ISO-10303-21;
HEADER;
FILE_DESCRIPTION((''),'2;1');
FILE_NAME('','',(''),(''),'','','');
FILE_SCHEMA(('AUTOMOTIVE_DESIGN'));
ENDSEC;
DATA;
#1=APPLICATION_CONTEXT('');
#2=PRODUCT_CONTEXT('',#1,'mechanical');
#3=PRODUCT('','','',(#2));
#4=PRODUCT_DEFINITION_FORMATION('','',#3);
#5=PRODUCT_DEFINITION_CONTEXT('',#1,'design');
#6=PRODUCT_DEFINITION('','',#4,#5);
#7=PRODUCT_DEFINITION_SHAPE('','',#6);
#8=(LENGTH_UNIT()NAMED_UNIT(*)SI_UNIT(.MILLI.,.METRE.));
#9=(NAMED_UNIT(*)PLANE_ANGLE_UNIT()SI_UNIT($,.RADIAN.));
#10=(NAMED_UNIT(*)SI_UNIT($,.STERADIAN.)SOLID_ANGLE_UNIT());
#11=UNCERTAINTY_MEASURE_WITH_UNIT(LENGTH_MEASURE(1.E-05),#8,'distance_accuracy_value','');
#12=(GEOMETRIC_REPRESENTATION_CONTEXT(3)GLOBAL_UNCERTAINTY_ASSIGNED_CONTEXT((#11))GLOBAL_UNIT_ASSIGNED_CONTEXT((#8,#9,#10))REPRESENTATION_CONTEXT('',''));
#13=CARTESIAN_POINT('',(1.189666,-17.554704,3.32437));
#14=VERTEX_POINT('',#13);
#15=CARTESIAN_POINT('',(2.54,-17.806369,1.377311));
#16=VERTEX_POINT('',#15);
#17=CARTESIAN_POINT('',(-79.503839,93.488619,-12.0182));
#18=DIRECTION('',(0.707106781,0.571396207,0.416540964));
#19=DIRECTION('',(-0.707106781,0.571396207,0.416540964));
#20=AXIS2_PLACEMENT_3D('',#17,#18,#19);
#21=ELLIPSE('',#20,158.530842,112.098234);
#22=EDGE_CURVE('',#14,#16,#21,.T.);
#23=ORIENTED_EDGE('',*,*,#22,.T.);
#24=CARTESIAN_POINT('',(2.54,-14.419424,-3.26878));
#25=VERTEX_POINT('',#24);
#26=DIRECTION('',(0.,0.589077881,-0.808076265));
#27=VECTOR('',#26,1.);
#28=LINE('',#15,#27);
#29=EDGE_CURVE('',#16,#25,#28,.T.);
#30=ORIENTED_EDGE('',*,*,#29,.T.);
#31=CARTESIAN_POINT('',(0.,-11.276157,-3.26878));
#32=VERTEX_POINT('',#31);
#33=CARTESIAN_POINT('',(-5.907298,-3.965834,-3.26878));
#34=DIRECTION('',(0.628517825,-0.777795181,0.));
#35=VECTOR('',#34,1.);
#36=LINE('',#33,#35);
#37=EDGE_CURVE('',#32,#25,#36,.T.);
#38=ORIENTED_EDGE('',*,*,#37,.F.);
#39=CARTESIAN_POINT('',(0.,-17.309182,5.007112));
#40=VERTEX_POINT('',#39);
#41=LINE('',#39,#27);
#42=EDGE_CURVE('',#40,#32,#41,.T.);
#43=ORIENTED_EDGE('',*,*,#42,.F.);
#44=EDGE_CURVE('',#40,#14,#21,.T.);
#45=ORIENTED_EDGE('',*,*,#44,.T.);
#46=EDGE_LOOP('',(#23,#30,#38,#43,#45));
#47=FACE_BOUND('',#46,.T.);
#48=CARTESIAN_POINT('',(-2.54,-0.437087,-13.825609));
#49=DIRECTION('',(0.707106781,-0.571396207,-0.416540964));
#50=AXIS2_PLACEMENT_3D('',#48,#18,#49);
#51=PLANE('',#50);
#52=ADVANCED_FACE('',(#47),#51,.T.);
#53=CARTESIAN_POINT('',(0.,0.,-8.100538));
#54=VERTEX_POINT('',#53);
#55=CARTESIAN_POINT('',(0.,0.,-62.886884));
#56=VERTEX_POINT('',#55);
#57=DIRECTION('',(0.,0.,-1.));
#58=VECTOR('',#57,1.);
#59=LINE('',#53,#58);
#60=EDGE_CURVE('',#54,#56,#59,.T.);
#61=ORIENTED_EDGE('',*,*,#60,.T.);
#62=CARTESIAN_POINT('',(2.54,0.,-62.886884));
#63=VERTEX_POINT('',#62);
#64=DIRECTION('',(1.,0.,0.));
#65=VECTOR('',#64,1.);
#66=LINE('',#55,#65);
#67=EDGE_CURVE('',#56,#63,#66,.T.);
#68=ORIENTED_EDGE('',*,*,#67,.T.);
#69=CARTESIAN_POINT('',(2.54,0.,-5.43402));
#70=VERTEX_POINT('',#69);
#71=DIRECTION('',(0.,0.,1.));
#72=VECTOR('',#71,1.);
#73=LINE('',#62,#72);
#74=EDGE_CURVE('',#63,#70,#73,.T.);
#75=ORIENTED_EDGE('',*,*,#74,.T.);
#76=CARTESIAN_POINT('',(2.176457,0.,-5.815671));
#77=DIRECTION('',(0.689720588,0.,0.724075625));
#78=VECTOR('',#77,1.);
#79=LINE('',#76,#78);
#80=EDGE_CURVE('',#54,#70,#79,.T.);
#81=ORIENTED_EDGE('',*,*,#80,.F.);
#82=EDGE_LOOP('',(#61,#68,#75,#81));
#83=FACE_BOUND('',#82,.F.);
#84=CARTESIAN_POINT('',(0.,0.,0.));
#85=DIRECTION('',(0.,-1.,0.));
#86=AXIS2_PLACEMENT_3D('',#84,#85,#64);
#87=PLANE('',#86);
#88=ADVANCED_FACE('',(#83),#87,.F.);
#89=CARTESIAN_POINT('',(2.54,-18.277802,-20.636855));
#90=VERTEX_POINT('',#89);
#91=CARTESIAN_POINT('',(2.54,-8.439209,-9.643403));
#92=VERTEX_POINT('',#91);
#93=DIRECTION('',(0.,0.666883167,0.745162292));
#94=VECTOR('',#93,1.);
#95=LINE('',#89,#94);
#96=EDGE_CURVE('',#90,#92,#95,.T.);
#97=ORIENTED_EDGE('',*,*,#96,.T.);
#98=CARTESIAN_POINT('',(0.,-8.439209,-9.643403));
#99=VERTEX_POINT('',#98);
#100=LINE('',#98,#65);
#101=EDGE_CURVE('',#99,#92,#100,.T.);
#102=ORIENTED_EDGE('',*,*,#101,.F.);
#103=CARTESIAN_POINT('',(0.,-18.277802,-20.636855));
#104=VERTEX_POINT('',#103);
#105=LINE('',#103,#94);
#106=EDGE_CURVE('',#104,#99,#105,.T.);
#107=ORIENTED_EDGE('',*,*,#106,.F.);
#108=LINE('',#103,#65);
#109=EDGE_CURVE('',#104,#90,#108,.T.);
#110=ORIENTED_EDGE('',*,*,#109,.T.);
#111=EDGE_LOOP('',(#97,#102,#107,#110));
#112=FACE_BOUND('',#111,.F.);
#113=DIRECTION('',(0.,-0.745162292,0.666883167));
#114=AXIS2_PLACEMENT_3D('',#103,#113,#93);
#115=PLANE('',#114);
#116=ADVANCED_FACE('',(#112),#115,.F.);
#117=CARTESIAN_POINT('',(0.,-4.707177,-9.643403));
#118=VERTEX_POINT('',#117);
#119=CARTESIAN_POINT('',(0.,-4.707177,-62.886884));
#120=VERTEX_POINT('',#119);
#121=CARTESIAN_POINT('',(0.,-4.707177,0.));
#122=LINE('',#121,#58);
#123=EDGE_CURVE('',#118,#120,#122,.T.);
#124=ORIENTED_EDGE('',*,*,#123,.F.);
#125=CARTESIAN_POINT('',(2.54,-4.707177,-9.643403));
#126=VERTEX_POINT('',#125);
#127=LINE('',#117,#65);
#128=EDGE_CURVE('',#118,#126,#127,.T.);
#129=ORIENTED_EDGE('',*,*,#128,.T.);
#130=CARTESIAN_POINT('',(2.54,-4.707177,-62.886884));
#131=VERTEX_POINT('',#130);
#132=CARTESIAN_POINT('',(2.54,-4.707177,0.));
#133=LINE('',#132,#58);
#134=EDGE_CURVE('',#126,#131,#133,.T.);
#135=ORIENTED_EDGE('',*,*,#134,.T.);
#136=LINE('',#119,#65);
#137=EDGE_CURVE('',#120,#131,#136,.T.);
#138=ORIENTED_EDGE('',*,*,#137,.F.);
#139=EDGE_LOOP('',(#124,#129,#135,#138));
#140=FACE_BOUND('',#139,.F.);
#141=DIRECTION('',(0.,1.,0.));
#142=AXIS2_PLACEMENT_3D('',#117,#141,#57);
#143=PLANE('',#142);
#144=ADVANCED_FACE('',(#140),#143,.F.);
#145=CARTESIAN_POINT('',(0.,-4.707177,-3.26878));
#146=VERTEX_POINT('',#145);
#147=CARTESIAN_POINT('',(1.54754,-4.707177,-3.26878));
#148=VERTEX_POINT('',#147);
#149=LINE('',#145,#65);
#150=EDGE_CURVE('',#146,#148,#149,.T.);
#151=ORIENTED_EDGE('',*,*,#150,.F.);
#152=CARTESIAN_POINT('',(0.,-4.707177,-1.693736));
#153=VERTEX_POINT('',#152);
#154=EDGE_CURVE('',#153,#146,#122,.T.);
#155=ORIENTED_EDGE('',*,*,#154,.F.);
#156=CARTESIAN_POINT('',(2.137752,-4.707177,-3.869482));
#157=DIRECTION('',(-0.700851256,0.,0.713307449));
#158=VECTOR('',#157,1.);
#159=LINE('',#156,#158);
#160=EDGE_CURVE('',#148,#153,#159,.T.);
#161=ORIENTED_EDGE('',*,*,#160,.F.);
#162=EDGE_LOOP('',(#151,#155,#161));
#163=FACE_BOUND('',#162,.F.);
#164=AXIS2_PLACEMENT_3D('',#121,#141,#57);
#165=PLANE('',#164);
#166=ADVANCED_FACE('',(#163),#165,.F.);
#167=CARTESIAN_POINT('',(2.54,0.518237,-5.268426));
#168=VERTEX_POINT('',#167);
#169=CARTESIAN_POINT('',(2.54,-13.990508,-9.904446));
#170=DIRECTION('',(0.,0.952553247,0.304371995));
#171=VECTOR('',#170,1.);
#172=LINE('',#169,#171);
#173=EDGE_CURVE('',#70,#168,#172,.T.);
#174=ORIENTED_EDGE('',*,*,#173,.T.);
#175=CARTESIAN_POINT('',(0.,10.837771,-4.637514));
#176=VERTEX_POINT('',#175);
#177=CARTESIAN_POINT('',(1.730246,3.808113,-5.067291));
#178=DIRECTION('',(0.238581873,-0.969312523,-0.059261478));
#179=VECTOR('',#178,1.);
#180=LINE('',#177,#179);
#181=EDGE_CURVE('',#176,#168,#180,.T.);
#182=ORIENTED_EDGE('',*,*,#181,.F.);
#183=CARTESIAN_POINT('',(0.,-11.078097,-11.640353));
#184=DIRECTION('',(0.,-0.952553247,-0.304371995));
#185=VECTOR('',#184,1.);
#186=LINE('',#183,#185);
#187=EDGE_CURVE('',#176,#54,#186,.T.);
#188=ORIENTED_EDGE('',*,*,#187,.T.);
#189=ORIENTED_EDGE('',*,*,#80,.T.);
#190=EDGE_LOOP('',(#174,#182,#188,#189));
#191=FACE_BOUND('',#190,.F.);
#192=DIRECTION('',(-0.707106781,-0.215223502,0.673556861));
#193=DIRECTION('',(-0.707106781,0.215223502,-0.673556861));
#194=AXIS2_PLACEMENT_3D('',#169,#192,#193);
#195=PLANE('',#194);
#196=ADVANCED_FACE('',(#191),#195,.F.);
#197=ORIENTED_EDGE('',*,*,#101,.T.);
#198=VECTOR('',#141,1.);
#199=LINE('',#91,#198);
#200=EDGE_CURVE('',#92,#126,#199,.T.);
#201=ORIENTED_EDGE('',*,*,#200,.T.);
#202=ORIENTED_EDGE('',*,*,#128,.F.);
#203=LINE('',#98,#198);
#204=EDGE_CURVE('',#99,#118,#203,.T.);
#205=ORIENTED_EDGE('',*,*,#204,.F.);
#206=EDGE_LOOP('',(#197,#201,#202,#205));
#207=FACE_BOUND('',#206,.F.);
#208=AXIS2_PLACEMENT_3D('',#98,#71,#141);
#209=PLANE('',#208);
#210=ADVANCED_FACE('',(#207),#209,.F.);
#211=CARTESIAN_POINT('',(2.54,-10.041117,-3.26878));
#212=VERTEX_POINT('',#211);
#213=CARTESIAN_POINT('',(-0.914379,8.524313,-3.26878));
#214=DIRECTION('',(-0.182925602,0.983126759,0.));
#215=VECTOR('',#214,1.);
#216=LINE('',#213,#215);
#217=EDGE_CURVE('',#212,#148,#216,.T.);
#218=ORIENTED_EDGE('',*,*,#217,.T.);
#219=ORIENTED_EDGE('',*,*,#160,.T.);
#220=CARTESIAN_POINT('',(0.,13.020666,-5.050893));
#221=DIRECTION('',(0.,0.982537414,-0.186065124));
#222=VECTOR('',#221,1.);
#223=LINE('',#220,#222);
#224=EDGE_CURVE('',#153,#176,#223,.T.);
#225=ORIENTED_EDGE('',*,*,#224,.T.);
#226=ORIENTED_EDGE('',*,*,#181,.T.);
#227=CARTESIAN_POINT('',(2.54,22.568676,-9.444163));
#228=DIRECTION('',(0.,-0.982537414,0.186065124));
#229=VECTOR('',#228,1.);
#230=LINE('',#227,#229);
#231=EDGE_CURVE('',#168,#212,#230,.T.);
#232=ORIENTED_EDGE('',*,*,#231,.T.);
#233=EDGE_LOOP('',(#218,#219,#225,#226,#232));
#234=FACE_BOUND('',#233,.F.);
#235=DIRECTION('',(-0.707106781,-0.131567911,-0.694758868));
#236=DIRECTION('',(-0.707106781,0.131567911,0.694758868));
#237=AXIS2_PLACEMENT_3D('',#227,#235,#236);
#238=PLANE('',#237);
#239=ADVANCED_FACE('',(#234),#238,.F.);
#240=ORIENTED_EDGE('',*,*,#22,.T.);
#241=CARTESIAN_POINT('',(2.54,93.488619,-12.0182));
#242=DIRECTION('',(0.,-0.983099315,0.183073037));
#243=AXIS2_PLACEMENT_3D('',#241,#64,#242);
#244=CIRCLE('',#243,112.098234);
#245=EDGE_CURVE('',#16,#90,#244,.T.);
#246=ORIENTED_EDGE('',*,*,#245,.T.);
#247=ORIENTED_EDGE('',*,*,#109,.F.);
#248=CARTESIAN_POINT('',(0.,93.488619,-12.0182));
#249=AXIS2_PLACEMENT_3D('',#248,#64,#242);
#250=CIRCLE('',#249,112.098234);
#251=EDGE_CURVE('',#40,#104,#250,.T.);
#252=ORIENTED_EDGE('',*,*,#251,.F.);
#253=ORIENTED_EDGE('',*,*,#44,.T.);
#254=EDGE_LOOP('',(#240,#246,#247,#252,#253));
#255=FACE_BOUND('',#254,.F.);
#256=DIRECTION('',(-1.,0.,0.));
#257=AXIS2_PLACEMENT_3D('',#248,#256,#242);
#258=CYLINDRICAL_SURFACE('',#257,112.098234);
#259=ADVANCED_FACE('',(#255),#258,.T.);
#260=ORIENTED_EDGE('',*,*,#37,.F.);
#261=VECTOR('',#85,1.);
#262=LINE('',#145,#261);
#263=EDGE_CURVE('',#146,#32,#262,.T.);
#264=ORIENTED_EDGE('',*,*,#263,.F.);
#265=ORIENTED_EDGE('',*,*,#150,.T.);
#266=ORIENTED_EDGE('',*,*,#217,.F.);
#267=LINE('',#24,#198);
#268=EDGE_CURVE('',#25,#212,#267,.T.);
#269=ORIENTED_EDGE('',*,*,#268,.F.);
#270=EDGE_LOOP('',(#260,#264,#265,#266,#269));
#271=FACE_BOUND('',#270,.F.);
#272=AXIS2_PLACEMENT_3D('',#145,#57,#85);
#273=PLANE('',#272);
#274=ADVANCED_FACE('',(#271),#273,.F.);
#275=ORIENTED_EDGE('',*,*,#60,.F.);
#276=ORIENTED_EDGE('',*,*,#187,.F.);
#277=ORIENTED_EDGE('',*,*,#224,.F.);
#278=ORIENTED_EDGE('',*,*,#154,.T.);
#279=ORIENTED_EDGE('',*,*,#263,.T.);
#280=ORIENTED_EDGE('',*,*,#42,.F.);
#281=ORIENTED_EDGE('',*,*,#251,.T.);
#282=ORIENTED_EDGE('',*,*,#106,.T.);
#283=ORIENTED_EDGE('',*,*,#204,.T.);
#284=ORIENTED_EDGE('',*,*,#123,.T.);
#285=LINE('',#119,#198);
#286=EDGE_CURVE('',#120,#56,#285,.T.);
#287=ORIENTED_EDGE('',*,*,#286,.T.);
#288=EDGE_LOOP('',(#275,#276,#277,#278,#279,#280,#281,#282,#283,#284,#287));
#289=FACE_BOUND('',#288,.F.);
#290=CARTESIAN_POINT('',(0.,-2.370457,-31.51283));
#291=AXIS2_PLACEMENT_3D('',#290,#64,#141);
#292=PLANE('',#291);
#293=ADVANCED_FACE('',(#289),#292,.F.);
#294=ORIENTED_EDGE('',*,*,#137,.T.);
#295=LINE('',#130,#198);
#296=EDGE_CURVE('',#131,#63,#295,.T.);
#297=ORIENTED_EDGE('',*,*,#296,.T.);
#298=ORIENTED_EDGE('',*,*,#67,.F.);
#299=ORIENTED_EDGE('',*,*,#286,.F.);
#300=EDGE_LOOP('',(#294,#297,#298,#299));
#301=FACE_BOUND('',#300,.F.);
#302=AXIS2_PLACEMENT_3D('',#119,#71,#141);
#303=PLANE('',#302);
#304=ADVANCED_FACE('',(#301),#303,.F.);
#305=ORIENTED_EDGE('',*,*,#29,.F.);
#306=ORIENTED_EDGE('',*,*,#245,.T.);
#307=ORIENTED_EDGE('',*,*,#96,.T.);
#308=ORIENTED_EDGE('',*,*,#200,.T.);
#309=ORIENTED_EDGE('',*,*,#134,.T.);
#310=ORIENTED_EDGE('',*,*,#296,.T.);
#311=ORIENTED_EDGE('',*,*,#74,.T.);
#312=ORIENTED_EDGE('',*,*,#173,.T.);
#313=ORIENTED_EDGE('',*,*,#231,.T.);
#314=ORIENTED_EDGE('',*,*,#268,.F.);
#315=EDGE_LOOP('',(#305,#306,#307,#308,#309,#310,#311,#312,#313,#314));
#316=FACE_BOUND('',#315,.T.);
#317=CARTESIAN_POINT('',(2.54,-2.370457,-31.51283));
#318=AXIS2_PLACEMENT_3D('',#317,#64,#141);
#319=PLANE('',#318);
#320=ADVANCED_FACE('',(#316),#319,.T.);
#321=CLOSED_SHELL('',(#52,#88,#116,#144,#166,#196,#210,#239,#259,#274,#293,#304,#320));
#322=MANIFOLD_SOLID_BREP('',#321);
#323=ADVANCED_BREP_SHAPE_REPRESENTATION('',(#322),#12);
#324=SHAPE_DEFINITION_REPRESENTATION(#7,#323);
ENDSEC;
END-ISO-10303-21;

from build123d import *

# Parameters (mm, degrees)
F1_DEPTH    = 2.54
F2_T4_DEPTH = 40.6971516331
F3_T4_DEPTH = 48.3394519199
F4_T4_DEPTH = 63.1242461628


# Not quite as in the source:
# - a fillet or chamfer that OpenCascade refuses, or shapes differently, is made with other operations: its cross-section is extruded or revolved along the edge and cut away or added


with BuildPart() as f1:
    # F0 (on Right) → F1 (new body)
    with BuildSketch(Plane.YZ):
        Polygon((-0.3011617849, 0), (-4.707176704, 0), (-4.707176704, -3.2687797211), (-4.707176704, -9.6434028819), (-4.707176704, -62.8868843283), (0, -62.8868843283), (0, -10.7670552097), align=None)
        with BuildLine():
            Line((-4.707176704, -9.6434028819), (-4.707176704, -3.2687797211))
            Line((-4.707176704, -3.2687797211), (-8.1328889355, -3.2687797211))
            Line((-8.1328889355, -3.2687797211), (-16.7150776833, 8.5039641708))
            ThreePointArc((-16.7150776833, 8.5039641708), (-18.448774527, -6.0153747507), (-18.2778015733, -20.6368546933))
            Line((-18.2778015733, -20.6368546933), (-8.4392093122, -9.6434028819))
            Line((-8.4392093122, -9.6434028819), (-4.707176704, -9.6434028819))
        make_face()
        Polygon((0, 0), (-0.3011617849, 0), (0, -10.7670552097), (21.1573056877, -4.0066023357), align=None)
    extrude(amount=F1_DEPTH)

    # F2: chamfer of 5.08 on 1 edges, made by hand


with BuildPart() as f2_tool2:
    # F2_s3 → F2_t4 (new body)
    with BuildSketch(Plane(origin=(0, 6.4295894432, -8.8198840726), x_dir=(1, 0, 0), z_dir=(0, -0.5890778812, 0.8080762649))):
        Polygon((-2.54, -8.497560346), (2.54, -13.577560346), (2.54, -8.497560346), align=None)
    extrude(amount=F2_T4_DEPTH)

    split(bisect_by=Plane.XY.offset(-3.2687797211), keep=Keep.TOP)


with BuildPart() as f1_1:
    add(f1.part)

    # F2_t1: cut F2_tool2
    add(f2_tool2.part, mode=Mode.SUBTRACT)

    # F3: chamfer of 5.08 on 1 edges, made by hand


with BuildPart() as f3_tool2:
    # F3_s3 → F3_t4 (new body)
    with BuildSketch(Plane(origin=(0, -15.5659961488, -4.9738461482), x_dir=(1, 0, 0), z_dir=(0, 0.9525532472, 0.3043719948))):
        Polygon((2.54, 5.1761934028), (-2.54, 10.2561934028), (2.54, 10.2561934028), align=None)
    extrude(amount=F3_T4_DEPTH)

    split(bisect_by=Plane.XZ, keep=Keep.BOTTOM)


with BuildPart() as f1_2:
    add(f1_1.part)

    # F3_t1: cut F3_tool2
    add(f3_tool2.part, mode=Mode.SUBTRACT)

    # F4: chamfer of 5.08 on 1 edges, made by hand


with BuildPart() as f4_tool2:
    # F4_s3 → F4_t4 (new body)
    with BuildSketch(Plane(origin=(0, 23.513886354, -4.4528728458), x_dir=(1, 0, 0), z_dir=(0, -0.9825374139, 0.1860651236))):
        Polygon((2.54, -5.08), (-2.54, 0), (2.54, 0), align=None)
    extrude(amount=F4_T4_DEPTH)

    split(bisect_by=Plane(origin=(-5.518780173, -4.4595952689, -3.2509913312), x_dir=(-0.6285178248, 0.7777951812, 0), z_dir=(0.7071067812, 0.5713962066, 0.4165409645)), keep=Keep.TOP)


with BuildPart() as f1_3:
    add(f1_2.part)

    # F4_t1: cut F4_tool2
    add(f4_tool2.part, mode=Mode.SUBTRACT)


solid = f1_3.part
